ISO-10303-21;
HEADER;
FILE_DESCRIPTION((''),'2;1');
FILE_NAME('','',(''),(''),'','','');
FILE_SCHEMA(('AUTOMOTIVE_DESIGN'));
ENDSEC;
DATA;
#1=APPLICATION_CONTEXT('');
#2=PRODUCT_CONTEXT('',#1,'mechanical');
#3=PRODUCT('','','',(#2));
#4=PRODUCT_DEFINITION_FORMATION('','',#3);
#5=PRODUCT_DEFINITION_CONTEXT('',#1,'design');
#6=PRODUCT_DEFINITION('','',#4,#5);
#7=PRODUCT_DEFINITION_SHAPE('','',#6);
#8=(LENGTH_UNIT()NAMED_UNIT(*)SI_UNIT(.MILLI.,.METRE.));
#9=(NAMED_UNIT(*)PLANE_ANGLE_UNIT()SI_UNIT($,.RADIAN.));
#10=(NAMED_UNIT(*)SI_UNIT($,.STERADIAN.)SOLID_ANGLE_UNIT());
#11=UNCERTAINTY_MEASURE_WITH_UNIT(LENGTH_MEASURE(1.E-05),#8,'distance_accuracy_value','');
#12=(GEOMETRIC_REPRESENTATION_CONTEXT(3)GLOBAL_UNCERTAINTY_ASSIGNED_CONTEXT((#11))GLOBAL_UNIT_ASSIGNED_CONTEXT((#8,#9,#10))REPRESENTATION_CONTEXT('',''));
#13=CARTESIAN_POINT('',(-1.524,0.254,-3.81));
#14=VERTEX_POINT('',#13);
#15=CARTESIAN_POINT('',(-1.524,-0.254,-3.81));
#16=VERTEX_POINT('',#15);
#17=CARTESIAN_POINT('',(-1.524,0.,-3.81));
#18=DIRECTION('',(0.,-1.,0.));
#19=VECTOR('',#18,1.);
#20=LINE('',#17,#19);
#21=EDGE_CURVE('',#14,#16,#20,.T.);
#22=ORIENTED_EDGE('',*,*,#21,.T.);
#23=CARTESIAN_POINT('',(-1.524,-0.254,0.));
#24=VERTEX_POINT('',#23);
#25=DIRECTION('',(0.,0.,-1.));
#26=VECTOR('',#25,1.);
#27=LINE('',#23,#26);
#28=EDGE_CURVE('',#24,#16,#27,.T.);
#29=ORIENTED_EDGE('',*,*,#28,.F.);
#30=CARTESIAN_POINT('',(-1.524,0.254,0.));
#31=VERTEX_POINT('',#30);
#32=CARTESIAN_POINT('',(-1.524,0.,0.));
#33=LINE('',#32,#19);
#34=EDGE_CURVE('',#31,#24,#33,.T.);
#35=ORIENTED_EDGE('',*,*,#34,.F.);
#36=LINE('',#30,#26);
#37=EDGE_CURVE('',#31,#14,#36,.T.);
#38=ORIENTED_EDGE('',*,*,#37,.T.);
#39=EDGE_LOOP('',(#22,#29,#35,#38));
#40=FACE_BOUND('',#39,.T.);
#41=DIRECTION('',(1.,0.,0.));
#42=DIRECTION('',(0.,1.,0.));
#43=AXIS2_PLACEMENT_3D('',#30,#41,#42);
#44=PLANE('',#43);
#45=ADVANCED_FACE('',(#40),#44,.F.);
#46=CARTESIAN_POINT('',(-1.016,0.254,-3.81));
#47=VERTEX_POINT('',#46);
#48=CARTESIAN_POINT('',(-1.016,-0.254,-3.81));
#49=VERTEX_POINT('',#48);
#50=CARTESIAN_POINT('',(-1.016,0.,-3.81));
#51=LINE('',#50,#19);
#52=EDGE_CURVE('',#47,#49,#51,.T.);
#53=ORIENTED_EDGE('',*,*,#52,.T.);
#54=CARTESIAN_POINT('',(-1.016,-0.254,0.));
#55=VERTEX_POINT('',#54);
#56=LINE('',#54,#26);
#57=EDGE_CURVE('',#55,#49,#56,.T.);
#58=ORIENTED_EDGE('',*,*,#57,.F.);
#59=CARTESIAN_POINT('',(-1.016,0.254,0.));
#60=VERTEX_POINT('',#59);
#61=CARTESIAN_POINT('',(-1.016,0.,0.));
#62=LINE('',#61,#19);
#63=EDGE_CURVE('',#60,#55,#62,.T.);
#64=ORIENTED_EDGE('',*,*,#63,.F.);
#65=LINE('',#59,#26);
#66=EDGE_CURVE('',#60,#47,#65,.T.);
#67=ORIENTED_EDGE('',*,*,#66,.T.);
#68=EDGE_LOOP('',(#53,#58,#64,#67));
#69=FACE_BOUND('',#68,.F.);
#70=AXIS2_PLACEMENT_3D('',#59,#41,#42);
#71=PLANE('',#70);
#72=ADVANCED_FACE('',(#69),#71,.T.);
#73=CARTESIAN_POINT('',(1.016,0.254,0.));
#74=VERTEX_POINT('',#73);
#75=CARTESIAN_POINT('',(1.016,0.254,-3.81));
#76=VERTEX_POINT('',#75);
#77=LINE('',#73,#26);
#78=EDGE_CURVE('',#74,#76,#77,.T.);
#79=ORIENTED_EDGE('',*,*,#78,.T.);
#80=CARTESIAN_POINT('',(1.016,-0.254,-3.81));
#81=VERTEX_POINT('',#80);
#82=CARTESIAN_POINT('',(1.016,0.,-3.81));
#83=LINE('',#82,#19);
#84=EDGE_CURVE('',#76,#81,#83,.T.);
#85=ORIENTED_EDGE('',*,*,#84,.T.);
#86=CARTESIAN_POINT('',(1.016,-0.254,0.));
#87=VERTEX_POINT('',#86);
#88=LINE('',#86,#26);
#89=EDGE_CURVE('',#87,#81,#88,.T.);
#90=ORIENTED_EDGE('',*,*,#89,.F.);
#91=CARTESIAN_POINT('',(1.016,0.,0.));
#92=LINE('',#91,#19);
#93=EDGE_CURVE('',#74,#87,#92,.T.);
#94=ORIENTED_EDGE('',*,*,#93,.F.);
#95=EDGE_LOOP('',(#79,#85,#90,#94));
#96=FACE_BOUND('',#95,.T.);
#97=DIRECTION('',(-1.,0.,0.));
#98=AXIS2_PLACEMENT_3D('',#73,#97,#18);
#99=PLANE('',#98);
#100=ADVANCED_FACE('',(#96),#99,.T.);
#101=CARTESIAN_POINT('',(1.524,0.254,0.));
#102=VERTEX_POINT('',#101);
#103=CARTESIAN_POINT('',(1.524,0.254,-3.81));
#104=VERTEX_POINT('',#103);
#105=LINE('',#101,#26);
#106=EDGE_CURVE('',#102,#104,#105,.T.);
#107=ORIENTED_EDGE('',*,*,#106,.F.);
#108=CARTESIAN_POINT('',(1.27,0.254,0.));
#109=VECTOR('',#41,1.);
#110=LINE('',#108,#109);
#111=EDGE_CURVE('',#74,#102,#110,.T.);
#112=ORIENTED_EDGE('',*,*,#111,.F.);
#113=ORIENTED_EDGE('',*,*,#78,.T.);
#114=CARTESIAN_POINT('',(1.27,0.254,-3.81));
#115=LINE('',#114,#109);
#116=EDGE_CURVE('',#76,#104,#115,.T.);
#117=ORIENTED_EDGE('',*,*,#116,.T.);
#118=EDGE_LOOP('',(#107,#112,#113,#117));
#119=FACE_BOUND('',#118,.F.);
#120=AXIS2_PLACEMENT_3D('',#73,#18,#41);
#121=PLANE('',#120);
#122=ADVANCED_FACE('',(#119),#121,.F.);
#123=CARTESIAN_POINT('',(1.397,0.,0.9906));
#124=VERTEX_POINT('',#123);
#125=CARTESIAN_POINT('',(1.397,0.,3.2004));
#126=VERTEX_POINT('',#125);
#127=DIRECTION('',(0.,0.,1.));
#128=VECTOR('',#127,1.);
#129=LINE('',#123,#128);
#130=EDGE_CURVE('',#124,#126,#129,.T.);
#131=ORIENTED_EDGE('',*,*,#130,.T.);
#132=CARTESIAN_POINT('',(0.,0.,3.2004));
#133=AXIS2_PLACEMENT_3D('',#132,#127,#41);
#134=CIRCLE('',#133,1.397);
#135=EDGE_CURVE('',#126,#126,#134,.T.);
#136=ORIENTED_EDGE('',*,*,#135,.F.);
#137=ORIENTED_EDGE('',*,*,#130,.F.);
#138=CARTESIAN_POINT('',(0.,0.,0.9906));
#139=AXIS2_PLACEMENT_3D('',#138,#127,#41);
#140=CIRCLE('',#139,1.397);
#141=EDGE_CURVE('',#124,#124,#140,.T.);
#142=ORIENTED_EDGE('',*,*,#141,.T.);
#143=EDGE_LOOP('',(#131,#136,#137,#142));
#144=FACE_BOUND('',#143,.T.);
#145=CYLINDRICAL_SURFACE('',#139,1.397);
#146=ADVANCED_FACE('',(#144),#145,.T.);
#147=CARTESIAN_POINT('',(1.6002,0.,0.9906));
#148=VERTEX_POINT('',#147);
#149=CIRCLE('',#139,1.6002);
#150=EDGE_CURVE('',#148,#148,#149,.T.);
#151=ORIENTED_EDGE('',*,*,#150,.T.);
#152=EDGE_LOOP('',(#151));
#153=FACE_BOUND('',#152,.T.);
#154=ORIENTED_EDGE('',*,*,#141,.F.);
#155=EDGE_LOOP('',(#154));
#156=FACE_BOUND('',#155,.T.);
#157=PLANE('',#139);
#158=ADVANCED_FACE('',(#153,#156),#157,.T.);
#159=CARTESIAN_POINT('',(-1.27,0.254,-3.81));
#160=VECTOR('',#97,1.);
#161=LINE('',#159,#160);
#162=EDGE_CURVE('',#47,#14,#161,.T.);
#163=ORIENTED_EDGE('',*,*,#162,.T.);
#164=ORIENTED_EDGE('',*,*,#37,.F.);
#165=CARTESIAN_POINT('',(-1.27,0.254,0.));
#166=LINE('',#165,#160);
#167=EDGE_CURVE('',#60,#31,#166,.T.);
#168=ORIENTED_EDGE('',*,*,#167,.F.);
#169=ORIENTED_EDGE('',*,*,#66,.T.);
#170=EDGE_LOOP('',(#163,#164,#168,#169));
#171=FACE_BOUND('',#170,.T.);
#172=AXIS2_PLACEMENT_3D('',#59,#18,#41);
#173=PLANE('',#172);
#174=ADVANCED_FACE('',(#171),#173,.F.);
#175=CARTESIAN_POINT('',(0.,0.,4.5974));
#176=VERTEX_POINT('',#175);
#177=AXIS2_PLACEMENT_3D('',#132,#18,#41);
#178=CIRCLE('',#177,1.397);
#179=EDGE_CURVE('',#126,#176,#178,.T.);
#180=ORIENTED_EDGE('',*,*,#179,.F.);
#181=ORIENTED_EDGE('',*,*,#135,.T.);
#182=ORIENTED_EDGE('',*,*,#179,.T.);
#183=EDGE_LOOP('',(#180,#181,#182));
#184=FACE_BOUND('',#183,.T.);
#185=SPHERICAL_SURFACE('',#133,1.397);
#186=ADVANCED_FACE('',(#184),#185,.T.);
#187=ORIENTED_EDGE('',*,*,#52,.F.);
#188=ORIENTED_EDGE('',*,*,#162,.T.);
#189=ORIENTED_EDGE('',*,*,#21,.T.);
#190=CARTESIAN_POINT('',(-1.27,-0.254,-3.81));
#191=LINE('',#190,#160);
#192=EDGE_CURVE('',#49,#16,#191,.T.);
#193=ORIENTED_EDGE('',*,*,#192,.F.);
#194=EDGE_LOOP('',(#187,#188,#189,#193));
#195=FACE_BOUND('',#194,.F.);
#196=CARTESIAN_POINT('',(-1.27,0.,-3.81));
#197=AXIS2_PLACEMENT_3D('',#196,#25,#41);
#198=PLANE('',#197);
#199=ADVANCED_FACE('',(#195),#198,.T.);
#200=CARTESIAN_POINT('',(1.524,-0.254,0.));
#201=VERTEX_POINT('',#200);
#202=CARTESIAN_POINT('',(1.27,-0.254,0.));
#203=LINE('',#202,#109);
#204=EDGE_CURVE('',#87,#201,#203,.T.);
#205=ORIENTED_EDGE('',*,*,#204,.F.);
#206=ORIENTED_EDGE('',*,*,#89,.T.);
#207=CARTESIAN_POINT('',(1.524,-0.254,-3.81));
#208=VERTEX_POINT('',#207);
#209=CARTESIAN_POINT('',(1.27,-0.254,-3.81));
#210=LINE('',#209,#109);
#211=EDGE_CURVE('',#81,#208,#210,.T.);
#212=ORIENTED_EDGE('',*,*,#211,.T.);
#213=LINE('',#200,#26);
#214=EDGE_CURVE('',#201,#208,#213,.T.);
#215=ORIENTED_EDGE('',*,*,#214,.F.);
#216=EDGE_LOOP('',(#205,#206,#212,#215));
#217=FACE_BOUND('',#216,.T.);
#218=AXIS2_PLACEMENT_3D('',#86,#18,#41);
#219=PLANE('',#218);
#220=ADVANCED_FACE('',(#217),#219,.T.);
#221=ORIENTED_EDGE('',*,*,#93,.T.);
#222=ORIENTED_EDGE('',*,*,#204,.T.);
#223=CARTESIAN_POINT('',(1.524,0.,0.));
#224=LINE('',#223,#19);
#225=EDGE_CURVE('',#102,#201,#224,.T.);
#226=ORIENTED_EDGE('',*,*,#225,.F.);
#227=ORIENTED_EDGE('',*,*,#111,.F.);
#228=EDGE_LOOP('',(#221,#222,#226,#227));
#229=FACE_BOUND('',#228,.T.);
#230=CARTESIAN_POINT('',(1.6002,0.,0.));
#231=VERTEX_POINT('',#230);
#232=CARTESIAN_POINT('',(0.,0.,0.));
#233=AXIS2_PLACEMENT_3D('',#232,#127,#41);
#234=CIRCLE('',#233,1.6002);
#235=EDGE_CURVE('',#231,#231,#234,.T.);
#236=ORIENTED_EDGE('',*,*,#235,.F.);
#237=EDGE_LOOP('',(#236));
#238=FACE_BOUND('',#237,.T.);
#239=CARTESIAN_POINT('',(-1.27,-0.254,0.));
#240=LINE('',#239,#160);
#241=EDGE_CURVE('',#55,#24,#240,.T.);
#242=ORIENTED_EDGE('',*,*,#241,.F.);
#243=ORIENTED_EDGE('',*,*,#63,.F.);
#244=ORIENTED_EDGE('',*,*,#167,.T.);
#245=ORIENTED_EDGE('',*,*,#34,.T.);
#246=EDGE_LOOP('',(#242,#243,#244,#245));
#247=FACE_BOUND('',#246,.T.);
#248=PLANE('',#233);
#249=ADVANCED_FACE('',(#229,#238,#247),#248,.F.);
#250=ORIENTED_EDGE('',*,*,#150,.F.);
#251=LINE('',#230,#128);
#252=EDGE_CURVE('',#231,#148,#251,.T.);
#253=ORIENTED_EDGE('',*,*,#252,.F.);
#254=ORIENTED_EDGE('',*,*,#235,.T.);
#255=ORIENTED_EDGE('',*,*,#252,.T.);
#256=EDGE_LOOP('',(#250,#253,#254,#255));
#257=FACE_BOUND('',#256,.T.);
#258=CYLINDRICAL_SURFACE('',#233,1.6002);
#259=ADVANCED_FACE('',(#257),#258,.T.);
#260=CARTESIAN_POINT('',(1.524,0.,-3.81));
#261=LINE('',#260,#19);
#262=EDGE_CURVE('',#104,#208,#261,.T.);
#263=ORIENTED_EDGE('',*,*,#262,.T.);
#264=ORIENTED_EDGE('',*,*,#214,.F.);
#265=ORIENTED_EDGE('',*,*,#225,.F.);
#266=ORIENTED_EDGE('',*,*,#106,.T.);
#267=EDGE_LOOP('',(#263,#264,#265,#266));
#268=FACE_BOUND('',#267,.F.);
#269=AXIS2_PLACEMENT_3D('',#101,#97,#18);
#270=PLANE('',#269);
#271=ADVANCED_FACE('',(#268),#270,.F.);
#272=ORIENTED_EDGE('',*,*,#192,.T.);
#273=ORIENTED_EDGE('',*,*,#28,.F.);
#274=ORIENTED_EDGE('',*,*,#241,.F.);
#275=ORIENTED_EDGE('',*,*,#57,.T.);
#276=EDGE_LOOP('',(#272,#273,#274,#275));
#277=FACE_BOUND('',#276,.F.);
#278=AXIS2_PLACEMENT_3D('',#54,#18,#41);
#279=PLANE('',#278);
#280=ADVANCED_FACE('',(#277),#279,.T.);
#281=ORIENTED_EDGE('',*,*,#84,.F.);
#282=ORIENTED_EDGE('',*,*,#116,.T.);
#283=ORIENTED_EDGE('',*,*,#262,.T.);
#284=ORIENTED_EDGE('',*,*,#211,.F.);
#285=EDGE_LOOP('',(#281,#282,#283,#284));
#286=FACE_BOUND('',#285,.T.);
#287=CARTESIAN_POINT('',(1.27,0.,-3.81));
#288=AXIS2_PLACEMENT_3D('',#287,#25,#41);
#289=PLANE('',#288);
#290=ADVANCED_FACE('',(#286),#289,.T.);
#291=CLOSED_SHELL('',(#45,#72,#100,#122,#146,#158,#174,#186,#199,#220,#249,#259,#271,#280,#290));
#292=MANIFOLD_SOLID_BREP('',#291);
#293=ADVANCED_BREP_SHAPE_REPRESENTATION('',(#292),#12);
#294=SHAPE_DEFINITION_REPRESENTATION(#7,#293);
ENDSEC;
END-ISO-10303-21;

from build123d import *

# Parameters (mm, degrees)
F2_W     = 0.508
F2_H     = 0.508
F3_DEPTH = 3.81


# Not quite as in the source:
# - a pattern or mirror of a feature is missing from the dataset's text; its kind, count and spacing are read off the source's solid


with BuildPart() as f1:
    # F0 (on Front) → F1 (revolve)
    with BuildSketch(Plane.XZ):
        with BuildLine():
            Line((0, 4.5974), (0, 0))
            Line((0, 0), (1.6002, 0))
            Line((1.6002, 0), (1.6002, 0.9906))
            Line((1.6002, 0.9906), (1.397, 0.9906))
            Line((1.397, 0.9906), (1.397, 3.2004))
            ThreePointArc((1.397, 3.2004), (0.9878281733, 4.1882281733), (0, 4.5974))
        make_face()
    revolve(axis=Axis((0, 0, 2.2987), (0, 0, 1)))

    # F2 (on face) → F3 (join)
    with BuildSketch(Plane(origin=(0, 0, 0), x_dir=(1, 0, 0), z_dir=(0, 0, -1))):
        with Locations((1.27, 0)):
            Rectangle(F2_W, F2_H)
    f3 = extrude(amount=F3_DEPTH)

    # F3_copies: F3 across plane
    add(f3.mirror(Plane(origin=(0, 0, 0), x_dir=(0, 0, -1), z_dir=(-1, 0, 0))))


solid = f1.part
